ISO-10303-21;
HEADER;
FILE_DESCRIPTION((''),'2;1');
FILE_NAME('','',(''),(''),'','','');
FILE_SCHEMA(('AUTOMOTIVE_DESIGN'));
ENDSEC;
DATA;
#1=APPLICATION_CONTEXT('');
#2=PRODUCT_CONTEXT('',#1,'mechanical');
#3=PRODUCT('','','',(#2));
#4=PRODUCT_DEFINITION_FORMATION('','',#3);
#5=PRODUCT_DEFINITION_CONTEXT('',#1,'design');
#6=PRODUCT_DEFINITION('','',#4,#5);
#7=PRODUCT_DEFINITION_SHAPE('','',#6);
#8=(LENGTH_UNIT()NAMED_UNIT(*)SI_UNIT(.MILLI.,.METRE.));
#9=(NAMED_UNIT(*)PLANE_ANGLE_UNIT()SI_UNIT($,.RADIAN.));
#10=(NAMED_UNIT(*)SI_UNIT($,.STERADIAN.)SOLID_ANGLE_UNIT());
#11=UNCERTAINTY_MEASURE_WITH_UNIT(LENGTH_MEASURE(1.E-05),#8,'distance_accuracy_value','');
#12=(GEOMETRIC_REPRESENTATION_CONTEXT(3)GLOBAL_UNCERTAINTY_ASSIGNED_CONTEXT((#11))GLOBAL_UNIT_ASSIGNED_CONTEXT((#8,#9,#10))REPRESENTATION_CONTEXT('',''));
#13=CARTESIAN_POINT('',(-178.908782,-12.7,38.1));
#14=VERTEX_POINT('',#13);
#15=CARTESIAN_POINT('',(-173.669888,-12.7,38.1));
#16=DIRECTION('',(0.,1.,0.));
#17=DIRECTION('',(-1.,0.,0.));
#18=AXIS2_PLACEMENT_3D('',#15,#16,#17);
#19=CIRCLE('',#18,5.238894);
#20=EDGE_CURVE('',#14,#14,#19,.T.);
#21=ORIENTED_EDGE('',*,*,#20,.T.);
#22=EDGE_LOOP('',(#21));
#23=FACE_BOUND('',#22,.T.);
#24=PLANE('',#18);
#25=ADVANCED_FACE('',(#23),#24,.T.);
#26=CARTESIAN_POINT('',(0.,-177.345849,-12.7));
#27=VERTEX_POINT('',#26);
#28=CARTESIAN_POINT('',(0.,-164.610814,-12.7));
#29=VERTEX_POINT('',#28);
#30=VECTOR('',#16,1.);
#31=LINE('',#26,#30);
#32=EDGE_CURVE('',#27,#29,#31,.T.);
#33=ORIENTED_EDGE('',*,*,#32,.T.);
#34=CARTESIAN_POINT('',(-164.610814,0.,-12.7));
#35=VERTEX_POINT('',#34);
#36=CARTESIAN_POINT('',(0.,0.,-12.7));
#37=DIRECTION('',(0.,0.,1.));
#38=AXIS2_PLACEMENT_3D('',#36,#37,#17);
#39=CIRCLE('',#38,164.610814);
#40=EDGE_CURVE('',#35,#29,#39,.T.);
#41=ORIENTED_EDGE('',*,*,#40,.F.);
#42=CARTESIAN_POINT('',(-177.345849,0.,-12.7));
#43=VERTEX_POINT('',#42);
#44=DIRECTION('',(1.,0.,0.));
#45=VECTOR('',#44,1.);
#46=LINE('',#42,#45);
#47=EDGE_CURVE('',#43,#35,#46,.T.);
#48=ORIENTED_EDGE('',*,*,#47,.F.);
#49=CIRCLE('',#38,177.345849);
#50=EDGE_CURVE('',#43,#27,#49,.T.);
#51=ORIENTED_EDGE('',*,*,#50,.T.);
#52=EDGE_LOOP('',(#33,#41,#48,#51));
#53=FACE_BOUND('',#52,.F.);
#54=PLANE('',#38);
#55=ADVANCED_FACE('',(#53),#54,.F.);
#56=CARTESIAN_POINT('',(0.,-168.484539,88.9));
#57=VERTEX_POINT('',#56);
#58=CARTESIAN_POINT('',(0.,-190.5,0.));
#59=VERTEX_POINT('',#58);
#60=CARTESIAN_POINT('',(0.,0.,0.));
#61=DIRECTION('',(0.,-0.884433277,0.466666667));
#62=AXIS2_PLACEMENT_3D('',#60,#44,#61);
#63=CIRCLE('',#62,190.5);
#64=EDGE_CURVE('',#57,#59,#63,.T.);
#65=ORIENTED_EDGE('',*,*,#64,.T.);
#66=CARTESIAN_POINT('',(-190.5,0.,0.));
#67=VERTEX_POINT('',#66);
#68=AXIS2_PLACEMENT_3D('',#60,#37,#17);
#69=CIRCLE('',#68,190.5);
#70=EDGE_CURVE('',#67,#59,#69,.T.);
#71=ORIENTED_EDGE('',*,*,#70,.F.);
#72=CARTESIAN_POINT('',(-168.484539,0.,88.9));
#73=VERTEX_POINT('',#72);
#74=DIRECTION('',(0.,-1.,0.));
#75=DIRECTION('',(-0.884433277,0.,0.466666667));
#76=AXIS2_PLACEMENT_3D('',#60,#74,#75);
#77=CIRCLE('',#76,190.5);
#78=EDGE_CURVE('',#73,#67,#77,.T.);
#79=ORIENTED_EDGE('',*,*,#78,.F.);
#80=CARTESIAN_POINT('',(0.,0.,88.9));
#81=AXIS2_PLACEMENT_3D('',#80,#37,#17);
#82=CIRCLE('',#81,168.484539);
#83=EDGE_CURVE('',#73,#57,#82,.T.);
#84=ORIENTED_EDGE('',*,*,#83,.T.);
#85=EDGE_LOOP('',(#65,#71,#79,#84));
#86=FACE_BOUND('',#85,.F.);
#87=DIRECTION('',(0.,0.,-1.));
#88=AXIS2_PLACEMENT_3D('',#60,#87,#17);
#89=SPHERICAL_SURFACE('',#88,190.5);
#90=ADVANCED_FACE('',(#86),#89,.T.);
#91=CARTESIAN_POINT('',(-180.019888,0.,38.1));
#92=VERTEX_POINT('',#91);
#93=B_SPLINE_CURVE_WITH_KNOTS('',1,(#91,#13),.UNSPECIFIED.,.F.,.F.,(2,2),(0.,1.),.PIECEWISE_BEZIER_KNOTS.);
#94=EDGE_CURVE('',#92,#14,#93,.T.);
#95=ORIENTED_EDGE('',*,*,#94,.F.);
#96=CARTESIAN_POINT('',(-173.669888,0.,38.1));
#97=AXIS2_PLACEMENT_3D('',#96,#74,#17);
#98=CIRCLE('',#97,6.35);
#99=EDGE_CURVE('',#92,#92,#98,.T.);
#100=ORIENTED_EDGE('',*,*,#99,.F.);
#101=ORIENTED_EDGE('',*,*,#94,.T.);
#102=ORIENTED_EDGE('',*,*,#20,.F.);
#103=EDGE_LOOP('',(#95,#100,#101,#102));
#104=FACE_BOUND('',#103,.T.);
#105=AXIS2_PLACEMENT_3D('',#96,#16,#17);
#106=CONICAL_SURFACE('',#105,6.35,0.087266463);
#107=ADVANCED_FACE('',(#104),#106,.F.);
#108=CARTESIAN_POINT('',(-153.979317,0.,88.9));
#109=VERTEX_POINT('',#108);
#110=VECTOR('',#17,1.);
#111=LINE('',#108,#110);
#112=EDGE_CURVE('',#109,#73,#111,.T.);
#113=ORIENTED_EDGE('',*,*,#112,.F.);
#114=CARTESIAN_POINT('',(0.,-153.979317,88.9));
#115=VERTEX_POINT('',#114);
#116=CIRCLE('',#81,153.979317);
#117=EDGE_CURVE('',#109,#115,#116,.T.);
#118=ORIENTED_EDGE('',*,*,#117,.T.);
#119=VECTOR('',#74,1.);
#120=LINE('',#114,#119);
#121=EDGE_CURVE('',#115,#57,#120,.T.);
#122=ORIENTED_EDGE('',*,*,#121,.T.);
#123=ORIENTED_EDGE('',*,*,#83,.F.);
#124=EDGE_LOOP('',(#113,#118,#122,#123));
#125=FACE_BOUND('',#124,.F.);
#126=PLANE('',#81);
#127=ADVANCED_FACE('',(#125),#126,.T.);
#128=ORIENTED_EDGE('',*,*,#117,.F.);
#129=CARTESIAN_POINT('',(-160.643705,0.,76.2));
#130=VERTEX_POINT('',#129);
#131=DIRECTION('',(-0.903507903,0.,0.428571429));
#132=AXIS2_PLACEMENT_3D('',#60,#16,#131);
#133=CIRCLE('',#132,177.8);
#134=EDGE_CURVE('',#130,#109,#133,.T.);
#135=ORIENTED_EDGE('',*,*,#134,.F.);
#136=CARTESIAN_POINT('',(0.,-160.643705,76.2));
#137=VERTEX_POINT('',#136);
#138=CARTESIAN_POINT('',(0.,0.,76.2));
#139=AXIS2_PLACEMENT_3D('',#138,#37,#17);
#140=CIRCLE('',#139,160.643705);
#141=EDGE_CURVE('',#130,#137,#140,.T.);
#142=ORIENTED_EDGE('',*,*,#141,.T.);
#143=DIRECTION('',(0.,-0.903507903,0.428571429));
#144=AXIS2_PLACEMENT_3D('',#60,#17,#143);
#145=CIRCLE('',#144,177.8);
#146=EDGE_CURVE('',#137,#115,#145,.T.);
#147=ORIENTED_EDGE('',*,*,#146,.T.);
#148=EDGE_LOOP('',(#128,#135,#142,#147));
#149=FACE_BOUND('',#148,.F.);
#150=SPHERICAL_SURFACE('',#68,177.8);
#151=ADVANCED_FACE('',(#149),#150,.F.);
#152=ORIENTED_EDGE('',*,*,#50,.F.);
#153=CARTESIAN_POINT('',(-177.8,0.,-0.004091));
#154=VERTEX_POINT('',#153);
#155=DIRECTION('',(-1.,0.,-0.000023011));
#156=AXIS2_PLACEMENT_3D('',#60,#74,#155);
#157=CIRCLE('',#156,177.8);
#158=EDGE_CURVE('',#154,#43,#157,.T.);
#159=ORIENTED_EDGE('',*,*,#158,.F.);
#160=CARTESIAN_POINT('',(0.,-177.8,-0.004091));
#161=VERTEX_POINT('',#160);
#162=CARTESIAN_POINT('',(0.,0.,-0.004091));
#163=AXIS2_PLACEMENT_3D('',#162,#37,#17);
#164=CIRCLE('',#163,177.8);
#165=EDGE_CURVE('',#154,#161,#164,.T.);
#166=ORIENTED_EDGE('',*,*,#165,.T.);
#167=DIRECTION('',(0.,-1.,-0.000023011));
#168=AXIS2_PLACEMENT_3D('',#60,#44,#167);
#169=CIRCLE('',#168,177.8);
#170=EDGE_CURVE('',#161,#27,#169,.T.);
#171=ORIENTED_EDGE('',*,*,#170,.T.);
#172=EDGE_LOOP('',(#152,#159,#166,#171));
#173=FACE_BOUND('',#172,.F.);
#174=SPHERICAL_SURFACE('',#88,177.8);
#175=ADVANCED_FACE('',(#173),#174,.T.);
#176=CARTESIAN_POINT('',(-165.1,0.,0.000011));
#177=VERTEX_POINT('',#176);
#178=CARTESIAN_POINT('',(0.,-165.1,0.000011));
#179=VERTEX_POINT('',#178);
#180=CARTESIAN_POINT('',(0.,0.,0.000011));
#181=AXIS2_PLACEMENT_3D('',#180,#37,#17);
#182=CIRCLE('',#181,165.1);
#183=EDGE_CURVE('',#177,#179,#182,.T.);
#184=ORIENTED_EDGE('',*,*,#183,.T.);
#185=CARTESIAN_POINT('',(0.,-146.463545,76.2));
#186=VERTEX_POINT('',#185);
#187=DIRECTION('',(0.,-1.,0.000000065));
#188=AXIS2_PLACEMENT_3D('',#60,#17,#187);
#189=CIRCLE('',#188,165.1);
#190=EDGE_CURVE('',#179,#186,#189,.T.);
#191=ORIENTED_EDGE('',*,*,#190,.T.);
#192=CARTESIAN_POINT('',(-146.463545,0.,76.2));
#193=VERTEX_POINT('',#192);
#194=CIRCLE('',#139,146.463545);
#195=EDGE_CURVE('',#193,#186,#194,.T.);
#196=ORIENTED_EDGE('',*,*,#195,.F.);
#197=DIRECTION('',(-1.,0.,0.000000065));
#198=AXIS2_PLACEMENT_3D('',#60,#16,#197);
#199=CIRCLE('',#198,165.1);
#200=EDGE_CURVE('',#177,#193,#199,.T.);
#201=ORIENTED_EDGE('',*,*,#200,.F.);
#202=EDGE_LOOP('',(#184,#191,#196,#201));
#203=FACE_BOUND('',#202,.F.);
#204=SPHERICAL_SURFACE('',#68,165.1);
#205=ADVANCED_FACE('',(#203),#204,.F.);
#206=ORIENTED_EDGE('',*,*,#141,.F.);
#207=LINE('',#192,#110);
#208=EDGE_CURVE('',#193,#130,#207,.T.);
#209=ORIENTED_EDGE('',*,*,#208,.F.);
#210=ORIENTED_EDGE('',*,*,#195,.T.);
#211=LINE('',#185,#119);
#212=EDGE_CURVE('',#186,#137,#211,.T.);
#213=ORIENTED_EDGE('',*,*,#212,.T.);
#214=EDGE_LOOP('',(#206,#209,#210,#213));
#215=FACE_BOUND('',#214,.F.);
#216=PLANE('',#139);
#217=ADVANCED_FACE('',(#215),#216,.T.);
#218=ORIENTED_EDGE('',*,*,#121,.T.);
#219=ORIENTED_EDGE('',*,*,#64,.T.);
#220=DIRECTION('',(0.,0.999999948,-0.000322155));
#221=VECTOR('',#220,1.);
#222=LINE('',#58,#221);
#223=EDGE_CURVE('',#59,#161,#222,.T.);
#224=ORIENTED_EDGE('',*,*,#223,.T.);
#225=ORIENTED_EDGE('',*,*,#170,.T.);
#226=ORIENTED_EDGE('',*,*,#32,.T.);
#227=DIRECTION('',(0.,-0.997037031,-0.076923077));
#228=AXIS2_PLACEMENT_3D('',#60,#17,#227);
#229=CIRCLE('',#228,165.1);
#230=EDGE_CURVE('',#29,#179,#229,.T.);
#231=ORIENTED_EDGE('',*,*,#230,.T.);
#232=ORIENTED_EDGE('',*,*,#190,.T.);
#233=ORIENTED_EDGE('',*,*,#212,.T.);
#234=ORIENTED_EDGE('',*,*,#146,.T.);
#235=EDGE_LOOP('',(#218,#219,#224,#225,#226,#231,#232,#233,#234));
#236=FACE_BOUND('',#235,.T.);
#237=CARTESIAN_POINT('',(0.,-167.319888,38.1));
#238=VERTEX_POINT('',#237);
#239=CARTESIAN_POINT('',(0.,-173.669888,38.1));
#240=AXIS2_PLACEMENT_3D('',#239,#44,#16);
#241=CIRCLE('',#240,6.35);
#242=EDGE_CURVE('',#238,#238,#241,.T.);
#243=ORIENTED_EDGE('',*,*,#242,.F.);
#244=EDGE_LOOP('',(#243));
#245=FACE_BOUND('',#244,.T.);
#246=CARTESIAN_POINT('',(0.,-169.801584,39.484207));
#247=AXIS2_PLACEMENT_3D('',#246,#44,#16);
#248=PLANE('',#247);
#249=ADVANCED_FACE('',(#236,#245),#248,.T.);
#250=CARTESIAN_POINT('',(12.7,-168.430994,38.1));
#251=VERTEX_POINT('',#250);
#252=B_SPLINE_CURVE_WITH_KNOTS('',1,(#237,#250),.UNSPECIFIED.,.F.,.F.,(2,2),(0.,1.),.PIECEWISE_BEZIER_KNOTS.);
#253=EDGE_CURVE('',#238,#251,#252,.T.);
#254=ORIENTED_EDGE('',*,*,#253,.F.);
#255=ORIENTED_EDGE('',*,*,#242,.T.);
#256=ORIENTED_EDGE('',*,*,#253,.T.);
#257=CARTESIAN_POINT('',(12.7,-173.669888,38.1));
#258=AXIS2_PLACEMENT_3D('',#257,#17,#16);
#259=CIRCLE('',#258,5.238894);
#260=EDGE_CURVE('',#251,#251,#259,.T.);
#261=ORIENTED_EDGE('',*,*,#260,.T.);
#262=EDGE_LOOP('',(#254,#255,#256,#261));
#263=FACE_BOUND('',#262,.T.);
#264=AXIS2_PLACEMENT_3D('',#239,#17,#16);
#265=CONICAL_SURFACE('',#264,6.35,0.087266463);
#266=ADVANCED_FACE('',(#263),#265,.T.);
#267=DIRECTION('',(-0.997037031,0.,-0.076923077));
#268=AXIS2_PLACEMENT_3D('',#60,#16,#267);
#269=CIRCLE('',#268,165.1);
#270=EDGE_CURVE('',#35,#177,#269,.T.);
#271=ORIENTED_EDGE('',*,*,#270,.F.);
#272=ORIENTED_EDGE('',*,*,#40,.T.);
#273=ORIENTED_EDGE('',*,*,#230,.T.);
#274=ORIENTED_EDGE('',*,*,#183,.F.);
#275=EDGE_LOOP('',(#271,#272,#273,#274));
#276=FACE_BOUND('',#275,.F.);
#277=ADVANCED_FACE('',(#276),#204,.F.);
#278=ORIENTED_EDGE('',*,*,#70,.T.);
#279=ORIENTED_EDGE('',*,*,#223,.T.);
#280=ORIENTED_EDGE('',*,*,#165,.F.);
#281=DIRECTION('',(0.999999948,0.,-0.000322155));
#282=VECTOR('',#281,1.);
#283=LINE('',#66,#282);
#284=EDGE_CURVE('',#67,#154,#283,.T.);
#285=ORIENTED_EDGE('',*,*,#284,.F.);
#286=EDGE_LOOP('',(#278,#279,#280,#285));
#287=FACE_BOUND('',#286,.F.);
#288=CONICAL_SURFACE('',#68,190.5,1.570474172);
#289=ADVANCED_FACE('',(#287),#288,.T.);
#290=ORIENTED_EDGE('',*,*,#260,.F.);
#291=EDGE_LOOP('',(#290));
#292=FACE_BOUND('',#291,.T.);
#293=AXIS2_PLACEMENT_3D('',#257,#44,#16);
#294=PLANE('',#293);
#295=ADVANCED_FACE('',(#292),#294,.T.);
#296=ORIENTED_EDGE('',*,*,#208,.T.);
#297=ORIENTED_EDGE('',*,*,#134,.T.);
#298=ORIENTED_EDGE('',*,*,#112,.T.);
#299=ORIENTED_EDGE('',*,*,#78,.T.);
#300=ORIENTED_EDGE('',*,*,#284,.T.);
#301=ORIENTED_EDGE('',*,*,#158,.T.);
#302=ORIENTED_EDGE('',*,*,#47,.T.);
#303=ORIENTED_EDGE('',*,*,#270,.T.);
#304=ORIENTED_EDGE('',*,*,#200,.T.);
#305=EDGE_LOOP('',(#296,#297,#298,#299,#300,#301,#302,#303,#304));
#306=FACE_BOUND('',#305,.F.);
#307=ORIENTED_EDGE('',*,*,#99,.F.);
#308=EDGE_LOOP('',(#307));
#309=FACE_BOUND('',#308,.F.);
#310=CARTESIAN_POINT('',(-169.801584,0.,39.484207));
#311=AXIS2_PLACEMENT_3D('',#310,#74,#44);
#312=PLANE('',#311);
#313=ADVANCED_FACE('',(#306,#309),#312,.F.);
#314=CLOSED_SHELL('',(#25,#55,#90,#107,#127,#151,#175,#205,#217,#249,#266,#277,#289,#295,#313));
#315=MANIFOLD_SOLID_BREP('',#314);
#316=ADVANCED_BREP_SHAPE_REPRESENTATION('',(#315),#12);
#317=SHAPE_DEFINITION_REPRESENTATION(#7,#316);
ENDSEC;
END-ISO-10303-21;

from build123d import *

# Parameters (mm, degrees)
F1_ANGLE = 90
F2_R     = 6.35
F3_DEPTH = 12.7
F3_TAPER = 5
F4_R     = 6.35
F5_DEPTH = 12.7
F5_TAPER = 5


# Not quite as in the source:
# - a feature names something its author has since deleted; it is built from what else it names


with BuildPart() as f1:
    # F0 (on Front) → F1 (revolve)
    with BuildSketch(Plane.XZ):
        with BuildLine():
            Line((-190.5, 0), (-177.7999999529, -0.0040913673))
            ThreePointArc((-177.7999999529, -0.0040913673), (-177.6863527462, -6.3561031883), (-177.3458485559, -12.7))
            Line((-177.3458485559, -12.7), (-164.6108137396, -12.7))
            ThreePointArc((-164.6108137396, -12.7), (-164.9776583118, -6.354703608), (-165.1, 1.06856e-05))
            ThreePointArc((-165.1, 1.06856e-05), (-160.3732216696, 39.2229495488), (-146.4635449523, 76.2))
            Line((-146.4635449523, 76.2), (-160.6437051366, 76.2))
            ThreePointArc((-160.6437051366, 76.2), (-157.4396201151, 82.6172259157), (-153.9793167929, 88.9))
            Line((-153.9793167929, 88.9), (-168.4845393501, 88.9))
            ThreePointArc((-168.4845393501, 88.9), (-184.9142432943, 45.792713688), (-190.5, 0))
        make_face()
    revolve(axis=Axis((0, 0, 38.1), (0, 0, 1)), revolution_arc=F1_ANGLE)

    # F2 (on face) → F3 (join)
    with BuildSketch(Plane.YZ):
        with Locations((-173.669888006, 38.1)):
            Circle(F2_R)
    extrude(amount=F3_DEPTH, taper=F3_TAPER)

    # F4 (on face) → F5 (cut)
    with BuildSketch(Plane(origin=(0, 0, 0), x_dir=(-1, 0, 0), z_dir=(0, 1, 0))):
        with Locations((173.669888006, 38.1)):
            Circle(F4_R)
    extrude(amount=-F5_DEPTH, taper=F5_TAPER, mode=Mode.SUBTRACT)


solid = f1.part
